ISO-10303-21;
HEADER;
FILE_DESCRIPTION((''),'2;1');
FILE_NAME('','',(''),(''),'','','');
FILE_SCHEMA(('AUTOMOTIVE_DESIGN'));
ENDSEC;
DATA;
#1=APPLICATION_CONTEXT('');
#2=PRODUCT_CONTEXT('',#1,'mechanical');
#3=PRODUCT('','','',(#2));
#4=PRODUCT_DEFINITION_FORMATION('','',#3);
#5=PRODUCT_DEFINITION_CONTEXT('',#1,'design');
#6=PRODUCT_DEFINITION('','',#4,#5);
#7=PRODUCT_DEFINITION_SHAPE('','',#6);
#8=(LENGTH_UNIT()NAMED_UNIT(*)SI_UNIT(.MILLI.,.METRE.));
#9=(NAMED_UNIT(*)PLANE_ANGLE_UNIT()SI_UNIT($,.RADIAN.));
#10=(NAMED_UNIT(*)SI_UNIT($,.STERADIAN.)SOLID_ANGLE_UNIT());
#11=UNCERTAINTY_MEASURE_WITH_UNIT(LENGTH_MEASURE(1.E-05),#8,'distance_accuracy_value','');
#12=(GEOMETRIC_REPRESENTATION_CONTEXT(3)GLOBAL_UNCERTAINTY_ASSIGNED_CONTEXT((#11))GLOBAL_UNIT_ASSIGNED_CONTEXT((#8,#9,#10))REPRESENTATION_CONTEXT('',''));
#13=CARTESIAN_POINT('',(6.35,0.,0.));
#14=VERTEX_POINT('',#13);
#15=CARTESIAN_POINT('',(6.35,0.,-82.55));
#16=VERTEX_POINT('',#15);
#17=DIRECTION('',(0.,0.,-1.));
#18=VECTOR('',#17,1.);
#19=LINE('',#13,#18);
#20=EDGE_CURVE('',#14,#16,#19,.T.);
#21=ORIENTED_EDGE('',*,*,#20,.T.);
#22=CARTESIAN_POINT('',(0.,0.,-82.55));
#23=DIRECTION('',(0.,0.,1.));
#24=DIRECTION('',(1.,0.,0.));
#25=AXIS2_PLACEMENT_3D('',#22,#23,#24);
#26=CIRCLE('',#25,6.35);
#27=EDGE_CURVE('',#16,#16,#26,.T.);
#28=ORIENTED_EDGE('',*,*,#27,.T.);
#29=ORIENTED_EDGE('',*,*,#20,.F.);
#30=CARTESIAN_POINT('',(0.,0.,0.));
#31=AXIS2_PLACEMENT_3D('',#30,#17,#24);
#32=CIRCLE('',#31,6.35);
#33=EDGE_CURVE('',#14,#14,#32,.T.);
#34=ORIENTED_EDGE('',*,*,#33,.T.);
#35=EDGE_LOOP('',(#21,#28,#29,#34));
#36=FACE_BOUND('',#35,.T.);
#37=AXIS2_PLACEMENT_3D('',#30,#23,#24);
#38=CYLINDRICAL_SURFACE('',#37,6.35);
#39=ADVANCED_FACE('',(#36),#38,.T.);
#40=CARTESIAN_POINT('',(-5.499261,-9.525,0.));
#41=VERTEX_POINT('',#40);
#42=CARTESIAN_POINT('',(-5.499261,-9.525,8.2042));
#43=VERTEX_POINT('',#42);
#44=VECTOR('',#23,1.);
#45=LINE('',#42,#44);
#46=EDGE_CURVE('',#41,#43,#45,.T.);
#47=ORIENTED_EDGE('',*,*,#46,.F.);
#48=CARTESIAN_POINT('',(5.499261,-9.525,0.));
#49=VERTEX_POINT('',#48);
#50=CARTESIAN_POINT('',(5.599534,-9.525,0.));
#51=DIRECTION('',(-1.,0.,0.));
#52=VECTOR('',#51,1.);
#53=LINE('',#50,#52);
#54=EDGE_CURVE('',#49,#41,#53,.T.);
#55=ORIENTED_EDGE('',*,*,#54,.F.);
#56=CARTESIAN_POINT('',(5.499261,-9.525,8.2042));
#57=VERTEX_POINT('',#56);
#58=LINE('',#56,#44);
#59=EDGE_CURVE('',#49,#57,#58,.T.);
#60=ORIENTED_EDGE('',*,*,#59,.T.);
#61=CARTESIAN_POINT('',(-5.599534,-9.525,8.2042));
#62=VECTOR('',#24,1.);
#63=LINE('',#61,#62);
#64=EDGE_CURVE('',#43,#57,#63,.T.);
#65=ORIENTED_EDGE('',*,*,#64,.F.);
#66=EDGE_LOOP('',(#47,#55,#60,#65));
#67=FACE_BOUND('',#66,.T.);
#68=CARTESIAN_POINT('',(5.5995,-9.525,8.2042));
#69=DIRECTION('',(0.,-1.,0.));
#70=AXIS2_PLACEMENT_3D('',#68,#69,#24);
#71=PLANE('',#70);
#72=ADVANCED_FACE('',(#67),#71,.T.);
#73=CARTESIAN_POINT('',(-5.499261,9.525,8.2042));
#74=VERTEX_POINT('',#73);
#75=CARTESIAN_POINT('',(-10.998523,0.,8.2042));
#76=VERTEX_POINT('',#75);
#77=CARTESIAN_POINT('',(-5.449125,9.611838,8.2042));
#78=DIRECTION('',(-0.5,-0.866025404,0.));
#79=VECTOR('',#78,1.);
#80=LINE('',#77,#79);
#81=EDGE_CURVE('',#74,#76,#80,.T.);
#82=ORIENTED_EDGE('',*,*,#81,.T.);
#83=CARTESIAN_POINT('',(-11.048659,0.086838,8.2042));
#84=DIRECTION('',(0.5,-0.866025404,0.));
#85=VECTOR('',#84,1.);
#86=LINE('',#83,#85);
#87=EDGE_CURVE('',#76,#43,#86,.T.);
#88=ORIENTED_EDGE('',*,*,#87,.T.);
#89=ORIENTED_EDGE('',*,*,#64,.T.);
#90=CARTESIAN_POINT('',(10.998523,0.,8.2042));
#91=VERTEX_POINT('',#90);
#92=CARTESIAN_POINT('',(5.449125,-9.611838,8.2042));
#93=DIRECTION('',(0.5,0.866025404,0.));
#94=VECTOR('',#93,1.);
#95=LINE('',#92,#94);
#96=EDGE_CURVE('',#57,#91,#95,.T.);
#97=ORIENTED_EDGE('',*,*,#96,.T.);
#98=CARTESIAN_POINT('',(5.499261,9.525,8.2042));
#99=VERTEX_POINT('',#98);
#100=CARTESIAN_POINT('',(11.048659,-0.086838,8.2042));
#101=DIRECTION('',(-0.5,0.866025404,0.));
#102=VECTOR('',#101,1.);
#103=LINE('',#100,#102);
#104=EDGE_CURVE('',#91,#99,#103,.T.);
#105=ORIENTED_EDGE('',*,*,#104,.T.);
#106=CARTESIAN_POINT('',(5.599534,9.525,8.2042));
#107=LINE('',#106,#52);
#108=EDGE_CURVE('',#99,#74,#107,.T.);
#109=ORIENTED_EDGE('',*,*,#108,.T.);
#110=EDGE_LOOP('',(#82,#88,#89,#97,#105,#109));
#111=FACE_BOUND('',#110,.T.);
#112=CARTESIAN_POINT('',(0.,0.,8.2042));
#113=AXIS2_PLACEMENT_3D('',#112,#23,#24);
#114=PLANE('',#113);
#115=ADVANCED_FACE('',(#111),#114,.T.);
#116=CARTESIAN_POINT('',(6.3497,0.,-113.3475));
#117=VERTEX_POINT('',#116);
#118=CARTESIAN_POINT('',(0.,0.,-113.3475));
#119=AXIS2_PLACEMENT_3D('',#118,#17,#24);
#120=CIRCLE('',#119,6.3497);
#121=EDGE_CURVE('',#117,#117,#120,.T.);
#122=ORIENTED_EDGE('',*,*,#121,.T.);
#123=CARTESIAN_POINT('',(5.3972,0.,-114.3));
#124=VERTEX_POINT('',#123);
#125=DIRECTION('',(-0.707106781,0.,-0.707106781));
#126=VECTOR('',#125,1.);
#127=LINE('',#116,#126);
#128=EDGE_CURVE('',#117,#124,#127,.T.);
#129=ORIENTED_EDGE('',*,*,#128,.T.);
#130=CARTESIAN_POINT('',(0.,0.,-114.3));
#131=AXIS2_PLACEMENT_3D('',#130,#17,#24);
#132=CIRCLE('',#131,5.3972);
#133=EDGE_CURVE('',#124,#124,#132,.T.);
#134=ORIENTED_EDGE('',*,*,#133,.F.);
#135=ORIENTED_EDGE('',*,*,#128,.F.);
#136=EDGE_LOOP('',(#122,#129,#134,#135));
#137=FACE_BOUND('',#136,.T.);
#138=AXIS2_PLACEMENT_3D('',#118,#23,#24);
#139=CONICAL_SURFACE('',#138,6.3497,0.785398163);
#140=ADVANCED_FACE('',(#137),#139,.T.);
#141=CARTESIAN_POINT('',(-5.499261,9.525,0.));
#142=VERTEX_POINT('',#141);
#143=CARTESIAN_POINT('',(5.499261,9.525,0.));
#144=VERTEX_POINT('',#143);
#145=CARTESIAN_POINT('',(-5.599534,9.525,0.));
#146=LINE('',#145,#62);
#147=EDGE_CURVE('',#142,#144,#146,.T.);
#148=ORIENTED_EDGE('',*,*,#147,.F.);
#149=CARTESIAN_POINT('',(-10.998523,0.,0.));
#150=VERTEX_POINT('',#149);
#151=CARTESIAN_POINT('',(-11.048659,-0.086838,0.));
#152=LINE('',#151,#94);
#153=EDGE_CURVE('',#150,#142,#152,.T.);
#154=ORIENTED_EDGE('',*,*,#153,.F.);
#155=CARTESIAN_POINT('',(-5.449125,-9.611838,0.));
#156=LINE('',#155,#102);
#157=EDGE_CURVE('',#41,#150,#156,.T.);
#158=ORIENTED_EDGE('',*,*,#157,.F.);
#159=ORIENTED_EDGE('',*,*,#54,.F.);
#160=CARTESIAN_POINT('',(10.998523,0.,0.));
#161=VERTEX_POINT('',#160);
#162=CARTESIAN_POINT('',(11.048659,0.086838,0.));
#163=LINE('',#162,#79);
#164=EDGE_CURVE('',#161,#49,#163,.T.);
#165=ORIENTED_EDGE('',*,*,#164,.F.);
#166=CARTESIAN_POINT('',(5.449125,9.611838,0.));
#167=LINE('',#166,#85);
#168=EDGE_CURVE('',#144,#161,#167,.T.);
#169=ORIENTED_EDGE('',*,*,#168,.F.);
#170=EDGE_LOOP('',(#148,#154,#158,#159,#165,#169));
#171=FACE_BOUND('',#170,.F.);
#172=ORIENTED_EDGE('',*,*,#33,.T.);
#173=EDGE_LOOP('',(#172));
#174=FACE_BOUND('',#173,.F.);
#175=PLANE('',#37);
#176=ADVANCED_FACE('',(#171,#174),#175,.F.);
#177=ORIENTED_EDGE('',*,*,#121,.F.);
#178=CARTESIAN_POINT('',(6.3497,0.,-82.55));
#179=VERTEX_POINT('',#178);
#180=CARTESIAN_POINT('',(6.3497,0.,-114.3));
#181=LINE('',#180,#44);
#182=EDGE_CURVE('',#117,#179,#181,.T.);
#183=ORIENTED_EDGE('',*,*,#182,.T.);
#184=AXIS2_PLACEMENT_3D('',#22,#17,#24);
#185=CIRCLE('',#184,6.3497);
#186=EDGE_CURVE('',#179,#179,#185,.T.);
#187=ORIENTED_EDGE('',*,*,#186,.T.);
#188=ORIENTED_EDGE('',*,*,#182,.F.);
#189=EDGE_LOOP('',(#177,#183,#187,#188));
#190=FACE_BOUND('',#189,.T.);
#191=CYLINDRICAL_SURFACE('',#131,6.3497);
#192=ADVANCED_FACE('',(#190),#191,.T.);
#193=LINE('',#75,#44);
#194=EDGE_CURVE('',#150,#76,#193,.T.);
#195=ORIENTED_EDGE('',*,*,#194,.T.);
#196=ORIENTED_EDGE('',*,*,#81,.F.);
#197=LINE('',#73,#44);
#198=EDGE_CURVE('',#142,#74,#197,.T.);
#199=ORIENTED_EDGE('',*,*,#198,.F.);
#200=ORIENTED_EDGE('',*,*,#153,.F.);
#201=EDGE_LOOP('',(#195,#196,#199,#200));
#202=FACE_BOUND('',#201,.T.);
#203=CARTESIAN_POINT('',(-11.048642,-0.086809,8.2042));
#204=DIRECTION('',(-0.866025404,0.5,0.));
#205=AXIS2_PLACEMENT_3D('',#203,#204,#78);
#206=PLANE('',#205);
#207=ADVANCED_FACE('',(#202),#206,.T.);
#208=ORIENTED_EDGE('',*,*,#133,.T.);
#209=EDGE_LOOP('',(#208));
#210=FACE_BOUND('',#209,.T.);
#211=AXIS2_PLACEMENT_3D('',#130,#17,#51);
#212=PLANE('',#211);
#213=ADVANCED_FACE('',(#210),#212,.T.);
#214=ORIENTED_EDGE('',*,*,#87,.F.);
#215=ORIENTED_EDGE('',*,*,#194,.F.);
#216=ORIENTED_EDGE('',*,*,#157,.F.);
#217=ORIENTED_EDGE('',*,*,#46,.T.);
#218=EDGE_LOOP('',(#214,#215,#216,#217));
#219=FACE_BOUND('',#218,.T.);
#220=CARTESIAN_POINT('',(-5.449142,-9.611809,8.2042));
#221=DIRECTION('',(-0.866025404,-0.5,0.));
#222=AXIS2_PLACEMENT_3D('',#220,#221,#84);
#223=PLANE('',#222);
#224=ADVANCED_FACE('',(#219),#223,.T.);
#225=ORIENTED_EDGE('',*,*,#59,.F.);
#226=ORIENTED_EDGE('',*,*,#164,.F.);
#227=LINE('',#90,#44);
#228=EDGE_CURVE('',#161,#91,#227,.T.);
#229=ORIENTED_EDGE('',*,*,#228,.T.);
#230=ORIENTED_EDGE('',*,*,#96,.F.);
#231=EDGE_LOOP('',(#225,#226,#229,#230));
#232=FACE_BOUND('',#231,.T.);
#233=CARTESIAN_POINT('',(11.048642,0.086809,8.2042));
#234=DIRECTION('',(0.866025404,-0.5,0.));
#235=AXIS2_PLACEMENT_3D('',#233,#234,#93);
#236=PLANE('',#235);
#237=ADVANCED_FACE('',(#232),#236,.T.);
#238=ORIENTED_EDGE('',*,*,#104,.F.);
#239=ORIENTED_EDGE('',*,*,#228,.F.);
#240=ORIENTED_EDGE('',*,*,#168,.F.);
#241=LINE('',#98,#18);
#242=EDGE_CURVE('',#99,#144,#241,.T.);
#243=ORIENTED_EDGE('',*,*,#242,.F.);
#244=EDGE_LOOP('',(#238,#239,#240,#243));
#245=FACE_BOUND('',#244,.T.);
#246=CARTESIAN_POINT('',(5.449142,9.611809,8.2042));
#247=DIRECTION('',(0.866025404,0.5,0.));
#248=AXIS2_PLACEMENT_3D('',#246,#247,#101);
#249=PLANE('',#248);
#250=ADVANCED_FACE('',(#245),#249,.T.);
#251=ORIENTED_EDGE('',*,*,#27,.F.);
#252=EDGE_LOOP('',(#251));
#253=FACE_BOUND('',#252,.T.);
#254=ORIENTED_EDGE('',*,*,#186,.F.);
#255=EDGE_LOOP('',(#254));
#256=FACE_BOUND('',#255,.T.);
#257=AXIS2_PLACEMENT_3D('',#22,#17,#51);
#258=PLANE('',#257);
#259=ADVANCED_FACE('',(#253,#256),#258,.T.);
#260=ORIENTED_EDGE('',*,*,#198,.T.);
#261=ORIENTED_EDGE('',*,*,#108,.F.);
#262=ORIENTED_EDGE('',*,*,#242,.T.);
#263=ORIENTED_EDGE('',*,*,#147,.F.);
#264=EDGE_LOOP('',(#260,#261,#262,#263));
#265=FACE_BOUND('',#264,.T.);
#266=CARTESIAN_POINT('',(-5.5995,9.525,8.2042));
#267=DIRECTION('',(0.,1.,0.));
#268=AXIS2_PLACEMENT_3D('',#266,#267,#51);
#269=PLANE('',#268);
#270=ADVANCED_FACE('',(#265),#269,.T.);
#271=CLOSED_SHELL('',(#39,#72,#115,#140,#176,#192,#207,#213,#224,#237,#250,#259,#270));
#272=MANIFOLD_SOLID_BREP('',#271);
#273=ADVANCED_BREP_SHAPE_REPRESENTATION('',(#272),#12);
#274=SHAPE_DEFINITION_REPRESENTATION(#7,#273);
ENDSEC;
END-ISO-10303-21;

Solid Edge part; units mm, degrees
sketch "Sketch1" plane through (0, 0, 0) normal (0, 0, 1) x (1, 0, 0)
  circle A0 centre (0, 0) radius 11.049
  dimension "D1" = 22.098
extrude "Protrusion1" add sketch "Sketch1" along normal blind 8.2042
sketch "Sketch2" plane through (0, 0, 0) normal (0, 0, -1) x (1, 0, 0)
  circle A0 centre (0, 0) radius 6.35
extrude "Protrusion2" add sketch "Sketch2" along normal blind 114.3
sketch "Sketch3" plane through (0, 0, -114.3) normal (0, 0, -1) x (1, 0, 0)
  circle A0 centre (0, 0) radius 6.3497
extrude "Cutout1" cut sketch "Sketch3" against normal blind 31.75 flip side to cut
chamfer "Chamfer_1" distance 0.9525 angle 45 1 edges at (-6.3497, 0, -114.3)
sketch "Sketch4" plane through (0, 0, 8.2042) normal (0, 0, 1) x (1, 0, 0)
  line L0 (-5.5995, 9.525) -> (5.5995, 9.525)
  dimension "D1" = 19.05
extrude "Cutout2" cut sketch "Sketch4" against normal up to next material side at (0, 9.575, 8.2042)
pattern_circular "Pattern1" count 6 over 360 about axis through (0, 0, 8.2042) along (0, 0, 1) of "Cutout2"
properties part number "24102122"
